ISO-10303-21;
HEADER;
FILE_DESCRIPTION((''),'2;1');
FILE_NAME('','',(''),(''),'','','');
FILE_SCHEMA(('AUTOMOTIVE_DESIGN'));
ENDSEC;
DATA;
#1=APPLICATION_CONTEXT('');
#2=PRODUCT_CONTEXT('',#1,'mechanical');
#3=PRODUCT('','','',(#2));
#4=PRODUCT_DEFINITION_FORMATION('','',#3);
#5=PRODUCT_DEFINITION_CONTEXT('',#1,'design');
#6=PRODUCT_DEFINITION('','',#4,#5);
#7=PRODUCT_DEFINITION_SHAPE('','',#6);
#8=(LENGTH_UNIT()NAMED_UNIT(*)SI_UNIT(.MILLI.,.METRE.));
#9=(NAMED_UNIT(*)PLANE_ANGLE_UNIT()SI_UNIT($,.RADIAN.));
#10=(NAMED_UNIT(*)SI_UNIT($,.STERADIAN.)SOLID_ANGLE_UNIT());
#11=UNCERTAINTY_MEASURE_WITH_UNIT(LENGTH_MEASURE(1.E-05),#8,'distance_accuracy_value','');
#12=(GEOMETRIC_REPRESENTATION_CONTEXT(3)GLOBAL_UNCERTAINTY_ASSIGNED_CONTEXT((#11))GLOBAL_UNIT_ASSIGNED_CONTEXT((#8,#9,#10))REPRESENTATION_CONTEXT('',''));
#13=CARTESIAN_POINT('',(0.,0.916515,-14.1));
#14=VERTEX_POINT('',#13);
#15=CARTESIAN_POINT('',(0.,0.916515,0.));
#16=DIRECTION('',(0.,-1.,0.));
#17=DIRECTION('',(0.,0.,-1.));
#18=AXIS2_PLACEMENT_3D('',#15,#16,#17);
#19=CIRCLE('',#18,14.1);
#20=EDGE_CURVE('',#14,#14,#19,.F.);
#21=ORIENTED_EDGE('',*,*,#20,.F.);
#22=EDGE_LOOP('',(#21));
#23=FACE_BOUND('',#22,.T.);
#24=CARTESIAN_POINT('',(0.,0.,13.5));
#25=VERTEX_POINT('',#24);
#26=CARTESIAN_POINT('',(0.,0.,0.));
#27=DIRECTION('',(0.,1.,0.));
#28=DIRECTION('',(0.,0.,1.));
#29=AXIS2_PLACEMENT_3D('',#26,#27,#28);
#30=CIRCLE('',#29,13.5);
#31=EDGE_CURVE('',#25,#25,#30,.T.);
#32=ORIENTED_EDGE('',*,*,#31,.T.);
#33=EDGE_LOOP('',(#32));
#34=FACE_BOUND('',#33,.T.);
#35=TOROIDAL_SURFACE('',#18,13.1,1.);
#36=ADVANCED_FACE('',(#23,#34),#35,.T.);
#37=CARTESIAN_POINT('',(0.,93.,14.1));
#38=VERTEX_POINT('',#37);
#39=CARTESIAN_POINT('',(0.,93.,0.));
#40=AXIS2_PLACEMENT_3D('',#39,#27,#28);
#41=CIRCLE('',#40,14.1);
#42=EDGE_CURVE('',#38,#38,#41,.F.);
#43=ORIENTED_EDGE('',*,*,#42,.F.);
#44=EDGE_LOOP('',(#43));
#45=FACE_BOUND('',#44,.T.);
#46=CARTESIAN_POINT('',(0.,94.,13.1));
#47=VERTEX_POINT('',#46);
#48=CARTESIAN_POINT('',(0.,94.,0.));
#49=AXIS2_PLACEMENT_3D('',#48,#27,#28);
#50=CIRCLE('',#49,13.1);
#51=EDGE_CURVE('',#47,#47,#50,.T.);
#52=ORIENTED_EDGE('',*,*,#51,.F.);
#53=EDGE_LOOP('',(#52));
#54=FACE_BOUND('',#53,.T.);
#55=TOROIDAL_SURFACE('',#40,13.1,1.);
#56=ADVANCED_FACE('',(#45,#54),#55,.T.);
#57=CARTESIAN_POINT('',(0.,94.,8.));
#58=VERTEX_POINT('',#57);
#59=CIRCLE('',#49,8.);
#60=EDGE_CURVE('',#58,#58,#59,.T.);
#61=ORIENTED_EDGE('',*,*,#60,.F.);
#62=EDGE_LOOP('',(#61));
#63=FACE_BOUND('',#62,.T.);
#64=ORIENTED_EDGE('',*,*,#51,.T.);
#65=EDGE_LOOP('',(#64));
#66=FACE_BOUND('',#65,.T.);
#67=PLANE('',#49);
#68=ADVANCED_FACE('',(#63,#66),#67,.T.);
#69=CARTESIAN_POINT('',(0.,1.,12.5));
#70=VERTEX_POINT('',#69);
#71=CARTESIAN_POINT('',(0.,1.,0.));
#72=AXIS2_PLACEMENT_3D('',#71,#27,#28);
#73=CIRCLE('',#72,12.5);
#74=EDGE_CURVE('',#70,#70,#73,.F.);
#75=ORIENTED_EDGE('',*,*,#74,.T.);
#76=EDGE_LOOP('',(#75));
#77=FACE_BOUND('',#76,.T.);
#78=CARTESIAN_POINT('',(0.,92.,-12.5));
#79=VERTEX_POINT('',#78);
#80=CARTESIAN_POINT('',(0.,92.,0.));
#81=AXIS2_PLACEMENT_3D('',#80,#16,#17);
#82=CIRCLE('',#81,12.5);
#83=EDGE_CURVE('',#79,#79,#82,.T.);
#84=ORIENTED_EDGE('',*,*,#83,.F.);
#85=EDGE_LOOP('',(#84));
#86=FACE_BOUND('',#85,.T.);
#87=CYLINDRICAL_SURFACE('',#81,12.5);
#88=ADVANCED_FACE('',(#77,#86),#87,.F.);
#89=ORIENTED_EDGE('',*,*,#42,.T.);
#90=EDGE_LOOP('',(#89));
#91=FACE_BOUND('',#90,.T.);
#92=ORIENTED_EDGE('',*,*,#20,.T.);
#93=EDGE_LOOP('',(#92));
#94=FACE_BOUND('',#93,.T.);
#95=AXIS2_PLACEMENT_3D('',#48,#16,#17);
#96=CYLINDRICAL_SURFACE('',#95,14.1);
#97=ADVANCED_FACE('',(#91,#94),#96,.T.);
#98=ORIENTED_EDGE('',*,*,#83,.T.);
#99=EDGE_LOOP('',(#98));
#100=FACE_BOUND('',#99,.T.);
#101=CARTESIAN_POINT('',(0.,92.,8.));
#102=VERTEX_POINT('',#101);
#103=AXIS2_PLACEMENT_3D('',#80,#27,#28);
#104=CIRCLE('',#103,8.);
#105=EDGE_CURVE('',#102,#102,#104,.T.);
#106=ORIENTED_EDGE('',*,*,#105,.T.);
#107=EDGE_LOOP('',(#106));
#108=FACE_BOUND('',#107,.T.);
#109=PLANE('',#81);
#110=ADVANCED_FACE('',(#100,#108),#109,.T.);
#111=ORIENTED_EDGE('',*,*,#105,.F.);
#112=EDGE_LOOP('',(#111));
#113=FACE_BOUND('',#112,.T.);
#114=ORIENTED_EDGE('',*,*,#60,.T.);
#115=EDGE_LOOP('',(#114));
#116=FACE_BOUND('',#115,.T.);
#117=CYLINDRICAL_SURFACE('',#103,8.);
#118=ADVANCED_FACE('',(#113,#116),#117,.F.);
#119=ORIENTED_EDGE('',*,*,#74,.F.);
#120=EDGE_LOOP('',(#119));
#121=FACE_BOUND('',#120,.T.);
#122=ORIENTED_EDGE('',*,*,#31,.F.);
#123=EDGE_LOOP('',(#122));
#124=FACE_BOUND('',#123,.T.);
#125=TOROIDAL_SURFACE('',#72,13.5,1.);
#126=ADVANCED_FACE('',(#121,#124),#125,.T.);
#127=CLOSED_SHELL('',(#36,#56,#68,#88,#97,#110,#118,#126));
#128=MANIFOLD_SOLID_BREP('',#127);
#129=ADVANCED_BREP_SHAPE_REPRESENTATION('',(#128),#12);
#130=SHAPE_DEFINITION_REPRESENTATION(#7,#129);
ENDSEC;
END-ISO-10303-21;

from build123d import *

# Parameters (mm, degrees)
SKETCH_1_R          = 14.1
EXTRUDE_1_DEPTH     = 94
SKETCH_2_R          = 12.5
CUT_EXTRUDE_1_DEPTH = 92
FILLET_2_R          = 1
FILLET_3_R          = 1
FILLET_4_R          = 1
SKETCH_3_R          = 8
CUT_EXTRUDE_2_DEPTH = 2


with BuildPart() as part:
    # Эскиз1 → Бобышка-Вытянуть1 (new body)
    with BuildSketch(Plane(origin=(0, 0, 0), x_dir=(1, 0, 0), z_dir=(0, 1, 0))):
        with Locations(Location((0, 0, 0), (0, 0, 270))):
            Circle(SKETCH_1_R)
    extrude(amount=EXTRUDE_1_DEPTH)

    # Эскиз2 → Вырез-Вытянуть1 (cut)
    with BuildSketch(Plane.XZ):
        with Locations(Location((0, 0, 0), (0, 0, 270))):
            Circle(SKETCH_2_R)
    extrude(amount=-CUT_EXTRUDE_1_DEPTH, mode=Mode.SUBTRACT)

    # Скругление2
    fillet_2_edges = [part.edges().sort_by_distance(p)[0] for p in [
        (0, 0, 12.5),
    ]]
    fillet(fillet_2_edges, radius=FILLET_2_R)

    # Скругление3
    # the kernel refuses this fillet: 1 mm, written as the material it takes off along each edge
    with BuildSketch(Plane(origin=(0, 0, 0), x_dir=(0, 0, 1), z_dir=(-1, 0, 0))) as fillet_3_piece_1:
        with BuildLine():
            CenterArc((13.1, 0.916515139), FILLET_3_R, 293.578178478, 66.421821522)
            Line((14.1, 0.916515139), (14.12, 0.916515139))
            Line((14.12, 0.916515139), (14.12, 0))
            Line((14.12, 0), (14.1, -0.02))
            ThreePointArc((14.1, -0.02), (13.8, -0.02), (13.508, -0.018330303))
            Line((13.508, -0.018330303), (13.5, 0))
        make_face()
    revolve(axis=Axis((0, 0, 0), (0, 1, 0)), mode=Mode.SUBTRACT)

    # Скругление4
    fillet_4_edges = [part.edges().sort_by_distance(p)[0] for p in [
        (0, 94, -14.1),
    ]]
    fillet(fillet_4_edges, radius=FILLET_4_R)

    # Эскиз3 → Вырез-Вытянуть2 (cut)
    with BuildSketch(Plane(origin=(0, 94, 0), x_dir=(1, 0, 0), z_dir=(0, 1, 0))):
        with Locations(Location((0, 0, 0), (0, 0, 270))):
            Circle(SKETCH_3_R)
    extrude(amount=-CUT_EXTRUDE_2_DEPTH, mode=Mode.SUBTRACT)


solid = part.part
